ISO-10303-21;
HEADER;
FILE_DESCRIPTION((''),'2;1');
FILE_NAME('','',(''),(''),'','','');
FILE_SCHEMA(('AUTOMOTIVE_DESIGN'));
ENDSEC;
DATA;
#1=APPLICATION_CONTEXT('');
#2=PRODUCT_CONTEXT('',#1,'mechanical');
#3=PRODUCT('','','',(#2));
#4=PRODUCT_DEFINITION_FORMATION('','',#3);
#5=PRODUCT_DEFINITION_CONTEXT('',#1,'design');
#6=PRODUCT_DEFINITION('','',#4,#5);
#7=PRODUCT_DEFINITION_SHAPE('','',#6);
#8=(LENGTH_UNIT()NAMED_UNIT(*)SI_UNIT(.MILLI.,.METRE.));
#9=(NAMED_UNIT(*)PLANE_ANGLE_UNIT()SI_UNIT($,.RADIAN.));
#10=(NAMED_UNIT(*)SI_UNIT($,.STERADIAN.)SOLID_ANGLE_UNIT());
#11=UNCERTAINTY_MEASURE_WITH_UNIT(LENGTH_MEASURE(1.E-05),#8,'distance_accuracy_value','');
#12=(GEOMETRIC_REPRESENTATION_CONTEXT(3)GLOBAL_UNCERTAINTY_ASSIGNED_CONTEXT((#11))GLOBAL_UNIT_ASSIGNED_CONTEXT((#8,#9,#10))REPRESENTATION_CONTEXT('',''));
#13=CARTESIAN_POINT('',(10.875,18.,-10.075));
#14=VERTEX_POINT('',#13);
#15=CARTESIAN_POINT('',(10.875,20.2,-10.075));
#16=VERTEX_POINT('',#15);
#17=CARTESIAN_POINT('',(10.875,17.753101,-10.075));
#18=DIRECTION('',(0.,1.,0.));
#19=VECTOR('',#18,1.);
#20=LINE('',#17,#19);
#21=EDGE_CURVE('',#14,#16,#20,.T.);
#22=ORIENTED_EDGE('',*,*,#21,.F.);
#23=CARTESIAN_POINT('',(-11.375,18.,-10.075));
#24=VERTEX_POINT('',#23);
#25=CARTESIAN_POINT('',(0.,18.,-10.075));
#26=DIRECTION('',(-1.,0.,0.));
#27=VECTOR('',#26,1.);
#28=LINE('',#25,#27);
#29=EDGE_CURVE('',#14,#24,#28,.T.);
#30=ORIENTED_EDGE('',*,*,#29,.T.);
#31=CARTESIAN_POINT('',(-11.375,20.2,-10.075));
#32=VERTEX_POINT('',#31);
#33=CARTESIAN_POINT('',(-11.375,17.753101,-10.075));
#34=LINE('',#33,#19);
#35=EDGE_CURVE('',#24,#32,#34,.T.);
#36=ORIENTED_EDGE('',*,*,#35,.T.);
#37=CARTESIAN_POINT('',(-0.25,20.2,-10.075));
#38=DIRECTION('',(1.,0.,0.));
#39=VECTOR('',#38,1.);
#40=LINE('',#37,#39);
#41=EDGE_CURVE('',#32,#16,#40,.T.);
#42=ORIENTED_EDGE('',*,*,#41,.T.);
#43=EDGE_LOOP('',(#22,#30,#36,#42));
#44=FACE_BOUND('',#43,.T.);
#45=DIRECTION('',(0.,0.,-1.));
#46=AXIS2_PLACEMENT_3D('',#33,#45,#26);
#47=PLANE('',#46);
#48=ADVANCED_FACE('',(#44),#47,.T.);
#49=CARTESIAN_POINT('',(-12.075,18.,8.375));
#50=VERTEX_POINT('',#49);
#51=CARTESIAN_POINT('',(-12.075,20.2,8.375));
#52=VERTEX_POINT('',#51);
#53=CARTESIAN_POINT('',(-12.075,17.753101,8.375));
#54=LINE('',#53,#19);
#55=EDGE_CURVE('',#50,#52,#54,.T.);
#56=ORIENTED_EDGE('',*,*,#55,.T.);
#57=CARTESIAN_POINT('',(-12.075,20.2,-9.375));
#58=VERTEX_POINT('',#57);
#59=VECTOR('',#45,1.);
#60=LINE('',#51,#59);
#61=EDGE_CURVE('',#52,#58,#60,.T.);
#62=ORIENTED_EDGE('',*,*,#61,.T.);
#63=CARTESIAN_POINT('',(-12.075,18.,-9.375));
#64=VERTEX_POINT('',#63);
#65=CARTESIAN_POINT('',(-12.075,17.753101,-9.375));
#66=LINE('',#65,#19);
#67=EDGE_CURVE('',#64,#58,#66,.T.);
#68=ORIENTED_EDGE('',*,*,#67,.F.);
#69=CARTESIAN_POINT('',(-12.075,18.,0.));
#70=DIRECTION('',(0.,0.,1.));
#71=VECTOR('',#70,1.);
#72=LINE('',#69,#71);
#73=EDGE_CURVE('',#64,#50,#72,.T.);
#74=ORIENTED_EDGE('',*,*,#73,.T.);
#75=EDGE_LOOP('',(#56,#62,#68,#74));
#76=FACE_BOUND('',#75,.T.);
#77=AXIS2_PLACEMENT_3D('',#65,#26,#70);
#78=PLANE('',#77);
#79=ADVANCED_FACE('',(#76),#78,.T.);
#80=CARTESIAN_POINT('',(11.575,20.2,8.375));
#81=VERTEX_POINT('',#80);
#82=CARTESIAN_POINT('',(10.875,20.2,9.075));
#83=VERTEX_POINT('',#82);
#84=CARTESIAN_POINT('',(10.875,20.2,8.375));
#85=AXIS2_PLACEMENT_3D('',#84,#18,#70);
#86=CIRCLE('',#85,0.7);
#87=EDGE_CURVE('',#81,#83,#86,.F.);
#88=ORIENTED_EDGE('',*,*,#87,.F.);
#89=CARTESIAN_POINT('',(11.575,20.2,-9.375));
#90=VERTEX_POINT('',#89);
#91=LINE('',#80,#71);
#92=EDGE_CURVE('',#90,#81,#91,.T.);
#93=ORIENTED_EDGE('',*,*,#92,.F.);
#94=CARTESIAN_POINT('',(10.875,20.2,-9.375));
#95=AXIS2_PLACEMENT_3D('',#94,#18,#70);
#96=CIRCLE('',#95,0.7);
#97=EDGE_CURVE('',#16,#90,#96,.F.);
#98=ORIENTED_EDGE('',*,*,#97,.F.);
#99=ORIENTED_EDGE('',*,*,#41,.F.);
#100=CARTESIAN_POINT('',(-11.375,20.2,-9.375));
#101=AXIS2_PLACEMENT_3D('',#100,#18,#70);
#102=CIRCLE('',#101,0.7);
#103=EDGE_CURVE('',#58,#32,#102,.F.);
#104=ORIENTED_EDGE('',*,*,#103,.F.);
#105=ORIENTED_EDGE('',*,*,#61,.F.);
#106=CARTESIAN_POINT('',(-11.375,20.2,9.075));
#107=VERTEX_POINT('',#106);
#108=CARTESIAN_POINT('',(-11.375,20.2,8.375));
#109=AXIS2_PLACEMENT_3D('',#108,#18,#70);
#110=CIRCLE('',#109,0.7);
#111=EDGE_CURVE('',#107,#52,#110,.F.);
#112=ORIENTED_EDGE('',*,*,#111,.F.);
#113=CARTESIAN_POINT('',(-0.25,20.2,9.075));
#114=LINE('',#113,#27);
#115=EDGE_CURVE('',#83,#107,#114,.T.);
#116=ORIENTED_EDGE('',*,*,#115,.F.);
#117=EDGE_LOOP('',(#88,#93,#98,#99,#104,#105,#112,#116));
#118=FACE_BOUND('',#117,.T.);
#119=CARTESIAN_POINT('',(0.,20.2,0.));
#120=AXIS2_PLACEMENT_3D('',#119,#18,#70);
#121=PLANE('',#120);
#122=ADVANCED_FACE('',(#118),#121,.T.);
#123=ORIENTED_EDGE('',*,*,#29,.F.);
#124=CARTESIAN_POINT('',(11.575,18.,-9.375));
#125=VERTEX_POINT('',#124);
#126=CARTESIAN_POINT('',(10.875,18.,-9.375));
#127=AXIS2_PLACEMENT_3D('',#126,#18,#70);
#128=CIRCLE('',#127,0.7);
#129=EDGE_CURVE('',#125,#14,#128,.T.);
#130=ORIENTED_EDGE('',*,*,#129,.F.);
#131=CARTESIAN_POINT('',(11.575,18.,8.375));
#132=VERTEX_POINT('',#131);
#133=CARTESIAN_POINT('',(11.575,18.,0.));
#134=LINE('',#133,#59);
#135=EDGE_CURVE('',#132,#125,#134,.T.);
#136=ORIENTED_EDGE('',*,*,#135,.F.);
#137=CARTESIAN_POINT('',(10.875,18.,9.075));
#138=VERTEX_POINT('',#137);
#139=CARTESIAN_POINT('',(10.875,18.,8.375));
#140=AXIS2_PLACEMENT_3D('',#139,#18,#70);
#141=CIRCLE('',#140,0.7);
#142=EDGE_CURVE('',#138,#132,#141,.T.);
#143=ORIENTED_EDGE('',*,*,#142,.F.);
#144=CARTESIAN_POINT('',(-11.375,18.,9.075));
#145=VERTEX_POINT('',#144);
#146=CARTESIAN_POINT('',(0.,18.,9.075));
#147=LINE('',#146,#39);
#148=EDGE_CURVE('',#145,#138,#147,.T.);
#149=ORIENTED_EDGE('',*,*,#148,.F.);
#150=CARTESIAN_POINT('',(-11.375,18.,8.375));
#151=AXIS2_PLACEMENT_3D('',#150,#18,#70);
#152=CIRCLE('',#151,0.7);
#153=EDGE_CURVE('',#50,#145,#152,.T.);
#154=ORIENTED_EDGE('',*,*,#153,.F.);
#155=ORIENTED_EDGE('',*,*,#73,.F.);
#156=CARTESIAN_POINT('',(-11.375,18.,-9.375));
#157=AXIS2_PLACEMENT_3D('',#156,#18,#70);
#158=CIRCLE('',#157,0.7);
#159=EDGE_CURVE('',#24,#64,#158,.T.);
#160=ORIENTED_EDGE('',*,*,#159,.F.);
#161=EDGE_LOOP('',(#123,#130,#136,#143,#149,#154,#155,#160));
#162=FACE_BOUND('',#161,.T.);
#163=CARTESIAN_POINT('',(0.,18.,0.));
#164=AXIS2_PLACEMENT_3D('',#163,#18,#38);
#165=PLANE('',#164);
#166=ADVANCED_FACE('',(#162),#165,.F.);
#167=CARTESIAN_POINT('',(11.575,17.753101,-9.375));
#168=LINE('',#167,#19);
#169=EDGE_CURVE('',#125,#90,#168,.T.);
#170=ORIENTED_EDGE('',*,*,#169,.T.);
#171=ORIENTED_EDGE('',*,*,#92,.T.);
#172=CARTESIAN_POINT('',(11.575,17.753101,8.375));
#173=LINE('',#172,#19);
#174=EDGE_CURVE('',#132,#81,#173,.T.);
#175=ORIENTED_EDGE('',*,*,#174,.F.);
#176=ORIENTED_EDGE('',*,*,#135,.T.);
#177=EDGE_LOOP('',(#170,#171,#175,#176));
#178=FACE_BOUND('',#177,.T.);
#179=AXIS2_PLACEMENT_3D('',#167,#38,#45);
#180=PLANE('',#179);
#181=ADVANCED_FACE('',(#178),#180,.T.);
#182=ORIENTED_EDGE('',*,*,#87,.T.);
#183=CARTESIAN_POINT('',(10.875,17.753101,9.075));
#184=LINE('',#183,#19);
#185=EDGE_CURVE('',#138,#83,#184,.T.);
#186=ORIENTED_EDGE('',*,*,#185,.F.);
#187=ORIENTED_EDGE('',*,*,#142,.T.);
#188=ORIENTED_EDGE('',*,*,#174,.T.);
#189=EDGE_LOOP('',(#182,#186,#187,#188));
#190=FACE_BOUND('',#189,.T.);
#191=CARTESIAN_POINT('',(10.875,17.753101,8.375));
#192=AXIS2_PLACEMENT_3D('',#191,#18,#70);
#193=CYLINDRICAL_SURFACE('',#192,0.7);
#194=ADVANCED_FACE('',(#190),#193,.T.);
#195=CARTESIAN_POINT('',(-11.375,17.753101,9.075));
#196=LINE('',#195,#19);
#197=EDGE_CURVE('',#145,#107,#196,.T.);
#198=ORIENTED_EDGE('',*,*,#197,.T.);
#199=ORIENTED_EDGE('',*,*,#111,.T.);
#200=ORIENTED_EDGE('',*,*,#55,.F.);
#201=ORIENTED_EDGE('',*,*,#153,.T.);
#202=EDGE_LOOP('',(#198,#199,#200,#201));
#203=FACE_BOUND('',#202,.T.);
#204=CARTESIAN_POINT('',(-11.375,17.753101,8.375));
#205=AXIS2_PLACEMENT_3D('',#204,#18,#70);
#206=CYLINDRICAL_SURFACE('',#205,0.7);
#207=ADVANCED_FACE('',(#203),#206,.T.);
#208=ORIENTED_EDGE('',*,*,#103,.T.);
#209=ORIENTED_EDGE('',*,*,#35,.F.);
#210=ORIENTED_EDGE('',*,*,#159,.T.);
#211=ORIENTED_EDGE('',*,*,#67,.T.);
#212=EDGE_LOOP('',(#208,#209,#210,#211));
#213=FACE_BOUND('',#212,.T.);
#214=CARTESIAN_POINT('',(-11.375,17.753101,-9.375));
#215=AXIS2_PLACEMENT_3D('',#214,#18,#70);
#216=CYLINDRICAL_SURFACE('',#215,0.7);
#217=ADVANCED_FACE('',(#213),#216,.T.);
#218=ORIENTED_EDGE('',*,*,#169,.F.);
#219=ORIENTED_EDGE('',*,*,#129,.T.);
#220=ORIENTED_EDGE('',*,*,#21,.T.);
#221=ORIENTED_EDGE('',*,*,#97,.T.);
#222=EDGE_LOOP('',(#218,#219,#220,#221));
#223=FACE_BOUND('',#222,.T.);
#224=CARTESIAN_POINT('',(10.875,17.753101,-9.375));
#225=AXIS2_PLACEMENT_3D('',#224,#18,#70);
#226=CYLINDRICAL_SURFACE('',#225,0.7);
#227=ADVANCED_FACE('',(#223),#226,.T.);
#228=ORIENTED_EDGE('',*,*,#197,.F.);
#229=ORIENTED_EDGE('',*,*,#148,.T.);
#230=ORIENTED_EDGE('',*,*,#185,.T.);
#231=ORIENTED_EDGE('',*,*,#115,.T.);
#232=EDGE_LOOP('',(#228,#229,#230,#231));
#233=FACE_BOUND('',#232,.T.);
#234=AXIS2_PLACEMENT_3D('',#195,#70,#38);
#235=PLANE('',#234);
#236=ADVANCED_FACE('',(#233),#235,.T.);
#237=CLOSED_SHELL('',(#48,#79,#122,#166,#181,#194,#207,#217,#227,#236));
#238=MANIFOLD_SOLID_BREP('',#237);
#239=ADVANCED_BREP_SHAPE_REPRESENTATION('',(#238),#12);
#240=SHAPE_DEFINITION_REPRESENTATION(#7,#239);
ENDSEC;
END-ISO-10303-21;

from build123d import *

# Parameters (mm, degrees)
F_611DOWN_1_START       = 19
F_611DOWN_1_DEPTH       = 1.2
F_611DOWN_1_START_2     = 18
F_611DOWN_1_2_OUTLINE_W = 22.362511336
F_611DOWN_1_2_OUTLINE_H = 15.04
F_611DOWN_1_2_DEPTH     = 1
SKETCH_1_W              = 22.362511336
SKETCH_1_H              = 15.04
EXTRUDE_1_DEPTH         = 1


# Read off the part's stored shape, not the designer's step: 基体零件-611Down-1
with BuildPart() as part:
    # 基体零件-611Down-1 outline → 基体零件-611Down-1 (new body)
    with BuildSketch(Plane(origin=(0, 0, 0), x_dir=(1, 0, 0), z_dir=(0, 1, 0)).offset(F_611DOWN_1_START)):
        with BuildLine():
            Line((-11.375, -9.075), (10.875, -9.075))
            ThreePointArc((10.875, -9.075), (11.369974747, -8.869974747), (11.575, -8.375))
            Line((11.575, -8.375), (11.575, 9.375))
            ThreePointArc((11.575, 9.375), (11.369974747, 9.869974747), (10.875, 10.075))
            Line((10.875, 10.075), (-11.375, 10.075))
            ThreePointArc((-11.375, 10.075), (-11.869974747, 9.869974747), (-12.075, 9.375))
            Line((-12.075, 9.375), (-12.075, -8.375))
            ThreePointArc((-12.075, -8.375), (-11.869974747, -8.869974747), (-11.375, -9.075))
        make_face()
    extrude(amount=F_611DOWN_1_DEPTH)

    # 611Down-1 2 outline → 611Down-1 2 (add)
    with BuildSketch(Plane(origin=(0, 0, 0), x_dir=(1, 0, 0), z_dir=(0, 1, 0)).offset(F_611DOWN_1_START_2)):
        with BuildLine():
            Line((-11.375, -9.075), (10.875, -9.075))
            ThreePointArc((10.875, -9.075), (11.369974747, -8.869974747), (11.575, -8.375))
            Line((11.575, -8.375), (11.575, 9.375))
            ThreePointArc((11.575, 9.375), (11.369974747, 9.869974747), (10.875, 10.075))
            Line((10.875, 10.075), (-11.375, 10.075))
            ThreePointArc((-11.375, 10.075), (-11.869974747, 9.869974747), (-12.075, 9.375))
            Line((-12.075, 9.375), (-12.075, -8.375))
            ThreePointArc((-12.075, -8.375), (-11.869974747, -8.869974747), (-11.375, -9.075))
        make_face()
        with Locations((0.106278341, -0.002552009)):
            Rectangle(F_611DOWN_1_2_OUTLINE_W, F_611DOWN_1_2_OUTLINE_H, mode=Mode.SUBTRACT)
    extrude(amount=F_611DOWN_1_2_DEPTH)

    # 草图1 → 凸台-拉伸1 (add)
    with BuildSketch(Plane.XZ.offset(-18)):
        with Locations((0.106278341, 0.002552009)):
            Rectangle(SKETCH_1_W, SKETCH_1_H)
    extrude(amount=-EXTRUDE_1_DEPTH)


solid = part.part
